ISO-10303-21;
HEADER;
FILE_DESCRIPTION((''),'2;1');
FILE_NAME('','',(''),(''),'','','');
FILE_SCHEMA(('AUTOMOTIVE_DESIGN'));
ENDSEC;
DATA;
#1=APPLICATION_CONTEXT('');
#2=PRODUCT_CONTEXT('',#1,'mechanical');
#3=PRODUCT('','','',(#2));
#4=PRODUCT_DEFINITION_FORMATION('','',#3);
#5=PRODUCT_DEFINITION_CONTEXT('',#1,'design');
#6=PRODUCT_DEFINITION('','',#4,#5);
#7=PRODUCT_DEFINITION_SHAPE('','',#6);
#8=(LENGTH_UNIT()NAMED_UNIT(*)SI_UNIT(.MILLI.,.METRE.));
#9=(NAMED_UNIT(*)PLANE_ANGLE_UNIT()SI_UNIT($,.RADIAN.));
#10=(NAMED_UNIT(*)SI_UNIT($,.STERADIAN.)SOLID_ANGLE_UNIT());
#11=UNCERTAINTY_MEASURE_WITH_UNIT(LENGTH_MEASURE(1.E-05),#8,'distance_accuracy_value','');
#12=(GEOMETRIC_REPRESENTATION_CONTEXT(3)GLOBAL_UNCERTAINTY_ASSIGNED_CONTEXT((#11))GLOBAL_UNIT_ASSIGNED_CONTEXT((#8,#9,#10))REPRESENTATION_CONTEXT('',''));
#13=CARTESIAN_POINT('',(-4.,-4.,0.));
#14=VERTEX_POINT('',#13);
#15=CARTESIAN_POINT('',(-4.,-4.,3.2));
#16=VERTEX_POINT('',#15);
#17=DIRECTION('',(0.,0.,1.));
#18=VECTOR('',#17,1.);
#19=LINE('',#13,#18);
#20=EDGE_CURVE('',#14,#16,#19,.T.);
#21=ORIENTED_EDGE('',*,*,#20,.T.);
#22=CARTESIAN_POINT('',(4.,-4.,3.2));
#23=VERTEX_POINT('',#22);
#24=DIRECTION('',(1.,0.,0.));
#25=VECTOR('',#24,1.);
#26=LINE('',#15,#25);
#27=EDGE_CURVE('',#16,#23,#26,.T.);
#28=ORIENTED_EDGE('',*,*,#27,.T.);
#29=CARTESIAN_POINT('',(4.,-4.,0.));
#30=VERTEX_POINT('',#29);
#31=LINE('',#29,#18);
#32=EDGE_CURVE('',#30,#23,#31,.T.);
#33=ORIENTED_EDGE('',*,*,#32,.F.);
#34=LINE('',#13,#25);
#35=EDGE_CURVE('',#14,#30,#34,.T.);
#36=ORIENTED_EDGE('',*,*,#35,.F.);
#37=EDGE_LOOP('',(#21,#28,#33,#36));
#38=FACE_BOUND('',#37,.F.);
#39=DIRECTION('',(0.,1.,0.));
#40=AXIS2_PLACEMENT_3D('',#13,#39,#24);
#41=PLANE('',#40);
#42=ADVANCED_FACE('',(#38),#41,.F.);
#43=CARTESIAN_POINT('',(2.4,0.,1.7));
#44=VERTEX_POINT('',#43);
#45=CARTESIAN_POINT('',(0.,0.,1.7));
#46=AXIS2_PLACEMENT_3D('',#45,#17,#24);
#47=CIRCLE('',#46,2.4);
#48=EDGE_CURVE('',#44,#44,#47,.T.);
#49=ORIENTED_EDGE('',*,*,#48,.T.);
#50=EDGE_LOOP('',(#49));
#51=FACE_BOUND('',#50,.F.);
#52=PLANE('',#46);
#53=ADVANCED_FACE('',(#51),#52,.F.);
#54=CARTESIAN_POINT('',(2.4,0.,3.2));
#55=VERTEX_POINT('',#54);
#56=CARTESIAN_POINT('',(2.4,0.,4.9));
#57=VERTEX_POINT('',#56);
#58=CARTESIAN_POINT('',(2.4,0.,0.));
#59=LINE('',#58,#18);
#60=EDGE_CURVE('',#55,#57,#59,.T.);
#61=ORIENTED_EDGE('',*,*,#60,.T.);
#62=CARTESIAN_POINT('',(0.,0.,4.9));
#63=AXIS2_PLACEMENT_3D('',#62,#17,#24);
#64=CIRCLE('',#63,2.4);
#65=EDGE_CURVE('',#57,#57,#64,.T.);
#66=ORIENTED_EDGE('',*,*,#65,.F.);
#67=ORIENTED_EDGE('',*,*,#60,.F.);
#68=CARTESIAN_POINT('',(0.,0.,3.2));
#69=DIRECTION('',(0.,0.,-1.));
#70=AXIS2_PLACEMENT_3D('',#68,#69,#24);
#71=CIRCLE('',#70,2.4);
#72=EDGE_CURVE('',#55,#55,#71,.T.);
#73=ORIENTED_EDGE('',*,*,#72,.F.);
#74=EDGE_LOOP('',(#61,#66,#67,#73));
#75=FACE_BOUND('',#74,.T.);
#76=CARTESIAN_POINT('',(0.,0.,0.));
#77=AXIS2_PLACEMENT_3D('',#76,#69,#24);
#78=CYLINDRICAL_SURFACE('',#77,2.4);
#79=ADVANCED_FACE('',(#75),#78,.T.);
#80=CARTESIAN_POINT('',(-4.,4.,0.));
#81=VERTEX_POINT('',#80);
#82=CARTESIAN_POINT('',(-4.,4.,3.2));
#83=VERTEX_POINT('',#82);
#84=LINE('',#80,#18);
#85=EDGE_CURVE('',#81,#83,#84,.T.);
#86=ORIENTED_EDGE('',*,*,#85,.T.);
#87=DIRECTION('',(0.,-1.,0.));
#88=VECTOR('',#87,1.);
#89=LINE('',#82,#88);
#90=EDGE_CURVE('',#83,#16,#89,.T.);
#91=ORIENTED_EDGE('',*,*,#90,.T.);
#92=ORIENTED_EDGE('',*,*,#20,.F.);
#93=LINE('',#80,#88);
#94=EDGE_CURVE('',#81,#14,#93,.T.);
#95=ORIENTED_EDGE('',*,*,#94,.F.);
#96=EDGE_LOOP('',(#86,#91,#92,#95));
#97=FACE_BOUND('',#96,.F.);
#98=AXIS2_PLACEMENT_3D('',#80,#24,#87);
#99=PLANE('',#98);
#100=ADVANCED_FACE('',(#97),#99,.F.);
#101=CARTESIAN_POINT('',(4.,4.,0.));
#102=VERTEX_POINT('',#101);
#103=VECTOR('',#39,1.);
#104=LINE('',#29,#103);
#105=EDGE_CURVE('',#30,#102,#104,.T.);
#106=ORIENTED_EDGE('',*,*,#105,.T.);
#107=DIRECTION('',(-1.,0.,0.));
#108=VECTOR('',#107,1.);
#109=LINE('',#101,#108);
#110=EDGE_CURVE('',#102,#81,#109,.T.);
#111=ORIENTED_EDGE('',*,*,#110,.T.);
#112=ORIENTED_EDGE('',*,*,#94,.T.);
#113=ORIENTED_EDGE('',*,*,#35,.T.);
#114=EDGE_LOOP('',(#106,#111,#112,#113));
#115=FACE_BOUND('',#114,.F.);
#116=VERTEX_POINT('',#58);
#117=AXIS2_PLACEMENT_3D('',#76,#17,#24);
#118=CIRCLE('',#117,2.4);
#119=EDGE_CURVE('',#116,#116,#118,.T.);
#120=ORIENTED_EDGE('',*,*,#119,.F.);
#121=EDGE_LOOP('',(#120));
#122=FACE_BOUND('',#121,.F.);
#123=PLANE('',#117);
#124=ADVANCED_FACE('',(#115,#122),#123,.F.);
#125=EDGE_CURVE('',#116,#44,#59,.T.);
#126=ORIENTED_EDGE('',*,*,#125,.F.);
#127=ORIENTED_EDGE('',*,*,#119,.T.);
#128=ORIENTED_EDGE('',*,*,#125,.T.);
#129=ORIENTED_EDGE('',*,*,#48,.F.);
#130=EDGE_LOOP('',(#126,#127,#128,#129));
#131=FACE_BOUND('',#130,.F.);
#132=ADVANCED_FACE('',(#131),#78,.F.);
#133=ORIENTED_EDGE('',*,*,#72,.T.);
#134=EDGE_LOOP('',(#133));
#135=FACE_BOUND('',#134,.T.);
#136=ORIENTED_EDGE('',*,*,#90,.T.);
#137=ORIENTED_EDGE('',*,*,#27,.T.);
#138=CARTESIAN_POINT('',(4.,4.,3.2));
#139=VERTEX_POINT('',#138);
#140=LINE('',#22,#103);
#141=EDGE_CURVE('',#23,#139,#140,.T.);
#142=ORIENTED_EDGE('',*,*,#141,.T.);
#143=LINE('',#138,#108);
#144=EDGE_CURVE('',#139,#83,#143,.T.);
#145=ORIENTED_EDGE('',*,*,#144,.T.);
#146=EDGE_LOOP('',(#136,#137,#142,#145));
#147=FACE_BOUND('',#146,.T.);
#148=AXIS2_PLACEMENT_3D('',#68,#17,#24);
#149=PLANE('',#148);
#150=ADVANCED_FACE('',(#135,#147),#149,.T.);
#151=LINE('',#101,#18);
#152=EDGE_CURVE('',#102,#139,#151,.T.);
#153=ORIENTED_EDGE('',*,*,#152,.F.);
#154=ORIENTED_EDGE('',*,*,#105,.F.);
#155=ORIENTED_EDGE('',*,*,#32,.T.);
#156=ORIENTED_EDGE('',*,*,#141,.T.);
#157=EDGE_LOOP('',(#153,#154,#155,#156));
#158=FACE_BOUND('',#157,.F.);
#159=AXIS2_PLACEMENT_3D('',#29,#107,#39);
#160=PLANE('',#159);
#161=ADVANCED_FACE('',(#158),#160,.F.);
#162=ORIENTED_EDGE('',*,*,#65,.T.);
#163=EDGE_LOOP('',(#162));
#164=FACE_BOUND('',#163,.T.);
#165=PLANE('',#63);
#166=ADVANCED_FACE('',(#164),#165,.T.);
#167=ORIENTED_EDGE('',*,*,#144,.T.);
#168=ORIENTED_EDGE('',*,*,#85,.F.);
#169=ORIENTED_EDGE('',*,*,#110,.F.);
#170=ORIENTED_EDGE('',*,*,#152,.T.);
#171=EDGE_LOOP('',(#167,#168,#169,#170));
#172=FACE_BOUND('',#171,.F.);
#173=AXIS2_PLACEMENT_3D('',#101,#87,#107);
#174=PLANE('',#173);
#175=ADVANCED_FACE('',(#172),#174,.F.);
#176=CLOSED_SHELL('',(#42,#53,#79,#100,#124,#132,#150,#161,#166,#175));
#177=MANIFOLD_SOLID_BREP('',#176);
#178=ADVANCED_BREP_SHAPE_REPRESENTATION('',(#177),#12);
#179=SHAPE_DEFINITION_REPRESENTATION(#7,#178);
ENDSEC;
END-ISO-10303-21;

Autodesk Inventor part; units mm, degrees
ref_plane "YZ Plane" through (0, 0, 0) normal (1, 0, 0) x (0, 1, 0)
ref_plane "XZ Plane" through (0, 0, 0) normal (0, 1, 0) x (-1, 0, 0)
ref_plane "XY Plane" through (0, 0, 0) normal (0, 0, 1) x (1, 0, 0)
sketch "Sketch1" plane through (0, 0, 0) normal (0, 0, 1) x (1, 0, 0)
  line L0 (-4, -4) -> (4, -4)
  line L1 (4, -4) -> (4, 4)
  line L2 (4, 4) -> (-4, 4)
  line L3 (-4, 4) -> (-4, -4)
  line L4 (-4, -4) -> (4, 4) construction
  line L5 (4, -4) -> (-4, 4) construction
  circle A0 centre (0, 0) radius 2.4
  dimension "d0" = 8
  dimension "d1" = 8
  dimension "d2" = 4.8
extrude "Extrusion1" add sketch "Sketch1" along normal blind 3.2 contours L3 L2 L1 L0 | A0
extrude "Extrusion2" add sketch "Sketch1" along normal blind 4.9 contours A0
extrude "Extrusion3" cut sketch "Sketch1" along normal blind 1.7 contours A0
pattern_of_one "Rectangular Pattern1"
equation "\"d11\" = d0"
equation "\"d24\" = d0"
properties part number "LEGO Stud 1x1 Transparent Green"
